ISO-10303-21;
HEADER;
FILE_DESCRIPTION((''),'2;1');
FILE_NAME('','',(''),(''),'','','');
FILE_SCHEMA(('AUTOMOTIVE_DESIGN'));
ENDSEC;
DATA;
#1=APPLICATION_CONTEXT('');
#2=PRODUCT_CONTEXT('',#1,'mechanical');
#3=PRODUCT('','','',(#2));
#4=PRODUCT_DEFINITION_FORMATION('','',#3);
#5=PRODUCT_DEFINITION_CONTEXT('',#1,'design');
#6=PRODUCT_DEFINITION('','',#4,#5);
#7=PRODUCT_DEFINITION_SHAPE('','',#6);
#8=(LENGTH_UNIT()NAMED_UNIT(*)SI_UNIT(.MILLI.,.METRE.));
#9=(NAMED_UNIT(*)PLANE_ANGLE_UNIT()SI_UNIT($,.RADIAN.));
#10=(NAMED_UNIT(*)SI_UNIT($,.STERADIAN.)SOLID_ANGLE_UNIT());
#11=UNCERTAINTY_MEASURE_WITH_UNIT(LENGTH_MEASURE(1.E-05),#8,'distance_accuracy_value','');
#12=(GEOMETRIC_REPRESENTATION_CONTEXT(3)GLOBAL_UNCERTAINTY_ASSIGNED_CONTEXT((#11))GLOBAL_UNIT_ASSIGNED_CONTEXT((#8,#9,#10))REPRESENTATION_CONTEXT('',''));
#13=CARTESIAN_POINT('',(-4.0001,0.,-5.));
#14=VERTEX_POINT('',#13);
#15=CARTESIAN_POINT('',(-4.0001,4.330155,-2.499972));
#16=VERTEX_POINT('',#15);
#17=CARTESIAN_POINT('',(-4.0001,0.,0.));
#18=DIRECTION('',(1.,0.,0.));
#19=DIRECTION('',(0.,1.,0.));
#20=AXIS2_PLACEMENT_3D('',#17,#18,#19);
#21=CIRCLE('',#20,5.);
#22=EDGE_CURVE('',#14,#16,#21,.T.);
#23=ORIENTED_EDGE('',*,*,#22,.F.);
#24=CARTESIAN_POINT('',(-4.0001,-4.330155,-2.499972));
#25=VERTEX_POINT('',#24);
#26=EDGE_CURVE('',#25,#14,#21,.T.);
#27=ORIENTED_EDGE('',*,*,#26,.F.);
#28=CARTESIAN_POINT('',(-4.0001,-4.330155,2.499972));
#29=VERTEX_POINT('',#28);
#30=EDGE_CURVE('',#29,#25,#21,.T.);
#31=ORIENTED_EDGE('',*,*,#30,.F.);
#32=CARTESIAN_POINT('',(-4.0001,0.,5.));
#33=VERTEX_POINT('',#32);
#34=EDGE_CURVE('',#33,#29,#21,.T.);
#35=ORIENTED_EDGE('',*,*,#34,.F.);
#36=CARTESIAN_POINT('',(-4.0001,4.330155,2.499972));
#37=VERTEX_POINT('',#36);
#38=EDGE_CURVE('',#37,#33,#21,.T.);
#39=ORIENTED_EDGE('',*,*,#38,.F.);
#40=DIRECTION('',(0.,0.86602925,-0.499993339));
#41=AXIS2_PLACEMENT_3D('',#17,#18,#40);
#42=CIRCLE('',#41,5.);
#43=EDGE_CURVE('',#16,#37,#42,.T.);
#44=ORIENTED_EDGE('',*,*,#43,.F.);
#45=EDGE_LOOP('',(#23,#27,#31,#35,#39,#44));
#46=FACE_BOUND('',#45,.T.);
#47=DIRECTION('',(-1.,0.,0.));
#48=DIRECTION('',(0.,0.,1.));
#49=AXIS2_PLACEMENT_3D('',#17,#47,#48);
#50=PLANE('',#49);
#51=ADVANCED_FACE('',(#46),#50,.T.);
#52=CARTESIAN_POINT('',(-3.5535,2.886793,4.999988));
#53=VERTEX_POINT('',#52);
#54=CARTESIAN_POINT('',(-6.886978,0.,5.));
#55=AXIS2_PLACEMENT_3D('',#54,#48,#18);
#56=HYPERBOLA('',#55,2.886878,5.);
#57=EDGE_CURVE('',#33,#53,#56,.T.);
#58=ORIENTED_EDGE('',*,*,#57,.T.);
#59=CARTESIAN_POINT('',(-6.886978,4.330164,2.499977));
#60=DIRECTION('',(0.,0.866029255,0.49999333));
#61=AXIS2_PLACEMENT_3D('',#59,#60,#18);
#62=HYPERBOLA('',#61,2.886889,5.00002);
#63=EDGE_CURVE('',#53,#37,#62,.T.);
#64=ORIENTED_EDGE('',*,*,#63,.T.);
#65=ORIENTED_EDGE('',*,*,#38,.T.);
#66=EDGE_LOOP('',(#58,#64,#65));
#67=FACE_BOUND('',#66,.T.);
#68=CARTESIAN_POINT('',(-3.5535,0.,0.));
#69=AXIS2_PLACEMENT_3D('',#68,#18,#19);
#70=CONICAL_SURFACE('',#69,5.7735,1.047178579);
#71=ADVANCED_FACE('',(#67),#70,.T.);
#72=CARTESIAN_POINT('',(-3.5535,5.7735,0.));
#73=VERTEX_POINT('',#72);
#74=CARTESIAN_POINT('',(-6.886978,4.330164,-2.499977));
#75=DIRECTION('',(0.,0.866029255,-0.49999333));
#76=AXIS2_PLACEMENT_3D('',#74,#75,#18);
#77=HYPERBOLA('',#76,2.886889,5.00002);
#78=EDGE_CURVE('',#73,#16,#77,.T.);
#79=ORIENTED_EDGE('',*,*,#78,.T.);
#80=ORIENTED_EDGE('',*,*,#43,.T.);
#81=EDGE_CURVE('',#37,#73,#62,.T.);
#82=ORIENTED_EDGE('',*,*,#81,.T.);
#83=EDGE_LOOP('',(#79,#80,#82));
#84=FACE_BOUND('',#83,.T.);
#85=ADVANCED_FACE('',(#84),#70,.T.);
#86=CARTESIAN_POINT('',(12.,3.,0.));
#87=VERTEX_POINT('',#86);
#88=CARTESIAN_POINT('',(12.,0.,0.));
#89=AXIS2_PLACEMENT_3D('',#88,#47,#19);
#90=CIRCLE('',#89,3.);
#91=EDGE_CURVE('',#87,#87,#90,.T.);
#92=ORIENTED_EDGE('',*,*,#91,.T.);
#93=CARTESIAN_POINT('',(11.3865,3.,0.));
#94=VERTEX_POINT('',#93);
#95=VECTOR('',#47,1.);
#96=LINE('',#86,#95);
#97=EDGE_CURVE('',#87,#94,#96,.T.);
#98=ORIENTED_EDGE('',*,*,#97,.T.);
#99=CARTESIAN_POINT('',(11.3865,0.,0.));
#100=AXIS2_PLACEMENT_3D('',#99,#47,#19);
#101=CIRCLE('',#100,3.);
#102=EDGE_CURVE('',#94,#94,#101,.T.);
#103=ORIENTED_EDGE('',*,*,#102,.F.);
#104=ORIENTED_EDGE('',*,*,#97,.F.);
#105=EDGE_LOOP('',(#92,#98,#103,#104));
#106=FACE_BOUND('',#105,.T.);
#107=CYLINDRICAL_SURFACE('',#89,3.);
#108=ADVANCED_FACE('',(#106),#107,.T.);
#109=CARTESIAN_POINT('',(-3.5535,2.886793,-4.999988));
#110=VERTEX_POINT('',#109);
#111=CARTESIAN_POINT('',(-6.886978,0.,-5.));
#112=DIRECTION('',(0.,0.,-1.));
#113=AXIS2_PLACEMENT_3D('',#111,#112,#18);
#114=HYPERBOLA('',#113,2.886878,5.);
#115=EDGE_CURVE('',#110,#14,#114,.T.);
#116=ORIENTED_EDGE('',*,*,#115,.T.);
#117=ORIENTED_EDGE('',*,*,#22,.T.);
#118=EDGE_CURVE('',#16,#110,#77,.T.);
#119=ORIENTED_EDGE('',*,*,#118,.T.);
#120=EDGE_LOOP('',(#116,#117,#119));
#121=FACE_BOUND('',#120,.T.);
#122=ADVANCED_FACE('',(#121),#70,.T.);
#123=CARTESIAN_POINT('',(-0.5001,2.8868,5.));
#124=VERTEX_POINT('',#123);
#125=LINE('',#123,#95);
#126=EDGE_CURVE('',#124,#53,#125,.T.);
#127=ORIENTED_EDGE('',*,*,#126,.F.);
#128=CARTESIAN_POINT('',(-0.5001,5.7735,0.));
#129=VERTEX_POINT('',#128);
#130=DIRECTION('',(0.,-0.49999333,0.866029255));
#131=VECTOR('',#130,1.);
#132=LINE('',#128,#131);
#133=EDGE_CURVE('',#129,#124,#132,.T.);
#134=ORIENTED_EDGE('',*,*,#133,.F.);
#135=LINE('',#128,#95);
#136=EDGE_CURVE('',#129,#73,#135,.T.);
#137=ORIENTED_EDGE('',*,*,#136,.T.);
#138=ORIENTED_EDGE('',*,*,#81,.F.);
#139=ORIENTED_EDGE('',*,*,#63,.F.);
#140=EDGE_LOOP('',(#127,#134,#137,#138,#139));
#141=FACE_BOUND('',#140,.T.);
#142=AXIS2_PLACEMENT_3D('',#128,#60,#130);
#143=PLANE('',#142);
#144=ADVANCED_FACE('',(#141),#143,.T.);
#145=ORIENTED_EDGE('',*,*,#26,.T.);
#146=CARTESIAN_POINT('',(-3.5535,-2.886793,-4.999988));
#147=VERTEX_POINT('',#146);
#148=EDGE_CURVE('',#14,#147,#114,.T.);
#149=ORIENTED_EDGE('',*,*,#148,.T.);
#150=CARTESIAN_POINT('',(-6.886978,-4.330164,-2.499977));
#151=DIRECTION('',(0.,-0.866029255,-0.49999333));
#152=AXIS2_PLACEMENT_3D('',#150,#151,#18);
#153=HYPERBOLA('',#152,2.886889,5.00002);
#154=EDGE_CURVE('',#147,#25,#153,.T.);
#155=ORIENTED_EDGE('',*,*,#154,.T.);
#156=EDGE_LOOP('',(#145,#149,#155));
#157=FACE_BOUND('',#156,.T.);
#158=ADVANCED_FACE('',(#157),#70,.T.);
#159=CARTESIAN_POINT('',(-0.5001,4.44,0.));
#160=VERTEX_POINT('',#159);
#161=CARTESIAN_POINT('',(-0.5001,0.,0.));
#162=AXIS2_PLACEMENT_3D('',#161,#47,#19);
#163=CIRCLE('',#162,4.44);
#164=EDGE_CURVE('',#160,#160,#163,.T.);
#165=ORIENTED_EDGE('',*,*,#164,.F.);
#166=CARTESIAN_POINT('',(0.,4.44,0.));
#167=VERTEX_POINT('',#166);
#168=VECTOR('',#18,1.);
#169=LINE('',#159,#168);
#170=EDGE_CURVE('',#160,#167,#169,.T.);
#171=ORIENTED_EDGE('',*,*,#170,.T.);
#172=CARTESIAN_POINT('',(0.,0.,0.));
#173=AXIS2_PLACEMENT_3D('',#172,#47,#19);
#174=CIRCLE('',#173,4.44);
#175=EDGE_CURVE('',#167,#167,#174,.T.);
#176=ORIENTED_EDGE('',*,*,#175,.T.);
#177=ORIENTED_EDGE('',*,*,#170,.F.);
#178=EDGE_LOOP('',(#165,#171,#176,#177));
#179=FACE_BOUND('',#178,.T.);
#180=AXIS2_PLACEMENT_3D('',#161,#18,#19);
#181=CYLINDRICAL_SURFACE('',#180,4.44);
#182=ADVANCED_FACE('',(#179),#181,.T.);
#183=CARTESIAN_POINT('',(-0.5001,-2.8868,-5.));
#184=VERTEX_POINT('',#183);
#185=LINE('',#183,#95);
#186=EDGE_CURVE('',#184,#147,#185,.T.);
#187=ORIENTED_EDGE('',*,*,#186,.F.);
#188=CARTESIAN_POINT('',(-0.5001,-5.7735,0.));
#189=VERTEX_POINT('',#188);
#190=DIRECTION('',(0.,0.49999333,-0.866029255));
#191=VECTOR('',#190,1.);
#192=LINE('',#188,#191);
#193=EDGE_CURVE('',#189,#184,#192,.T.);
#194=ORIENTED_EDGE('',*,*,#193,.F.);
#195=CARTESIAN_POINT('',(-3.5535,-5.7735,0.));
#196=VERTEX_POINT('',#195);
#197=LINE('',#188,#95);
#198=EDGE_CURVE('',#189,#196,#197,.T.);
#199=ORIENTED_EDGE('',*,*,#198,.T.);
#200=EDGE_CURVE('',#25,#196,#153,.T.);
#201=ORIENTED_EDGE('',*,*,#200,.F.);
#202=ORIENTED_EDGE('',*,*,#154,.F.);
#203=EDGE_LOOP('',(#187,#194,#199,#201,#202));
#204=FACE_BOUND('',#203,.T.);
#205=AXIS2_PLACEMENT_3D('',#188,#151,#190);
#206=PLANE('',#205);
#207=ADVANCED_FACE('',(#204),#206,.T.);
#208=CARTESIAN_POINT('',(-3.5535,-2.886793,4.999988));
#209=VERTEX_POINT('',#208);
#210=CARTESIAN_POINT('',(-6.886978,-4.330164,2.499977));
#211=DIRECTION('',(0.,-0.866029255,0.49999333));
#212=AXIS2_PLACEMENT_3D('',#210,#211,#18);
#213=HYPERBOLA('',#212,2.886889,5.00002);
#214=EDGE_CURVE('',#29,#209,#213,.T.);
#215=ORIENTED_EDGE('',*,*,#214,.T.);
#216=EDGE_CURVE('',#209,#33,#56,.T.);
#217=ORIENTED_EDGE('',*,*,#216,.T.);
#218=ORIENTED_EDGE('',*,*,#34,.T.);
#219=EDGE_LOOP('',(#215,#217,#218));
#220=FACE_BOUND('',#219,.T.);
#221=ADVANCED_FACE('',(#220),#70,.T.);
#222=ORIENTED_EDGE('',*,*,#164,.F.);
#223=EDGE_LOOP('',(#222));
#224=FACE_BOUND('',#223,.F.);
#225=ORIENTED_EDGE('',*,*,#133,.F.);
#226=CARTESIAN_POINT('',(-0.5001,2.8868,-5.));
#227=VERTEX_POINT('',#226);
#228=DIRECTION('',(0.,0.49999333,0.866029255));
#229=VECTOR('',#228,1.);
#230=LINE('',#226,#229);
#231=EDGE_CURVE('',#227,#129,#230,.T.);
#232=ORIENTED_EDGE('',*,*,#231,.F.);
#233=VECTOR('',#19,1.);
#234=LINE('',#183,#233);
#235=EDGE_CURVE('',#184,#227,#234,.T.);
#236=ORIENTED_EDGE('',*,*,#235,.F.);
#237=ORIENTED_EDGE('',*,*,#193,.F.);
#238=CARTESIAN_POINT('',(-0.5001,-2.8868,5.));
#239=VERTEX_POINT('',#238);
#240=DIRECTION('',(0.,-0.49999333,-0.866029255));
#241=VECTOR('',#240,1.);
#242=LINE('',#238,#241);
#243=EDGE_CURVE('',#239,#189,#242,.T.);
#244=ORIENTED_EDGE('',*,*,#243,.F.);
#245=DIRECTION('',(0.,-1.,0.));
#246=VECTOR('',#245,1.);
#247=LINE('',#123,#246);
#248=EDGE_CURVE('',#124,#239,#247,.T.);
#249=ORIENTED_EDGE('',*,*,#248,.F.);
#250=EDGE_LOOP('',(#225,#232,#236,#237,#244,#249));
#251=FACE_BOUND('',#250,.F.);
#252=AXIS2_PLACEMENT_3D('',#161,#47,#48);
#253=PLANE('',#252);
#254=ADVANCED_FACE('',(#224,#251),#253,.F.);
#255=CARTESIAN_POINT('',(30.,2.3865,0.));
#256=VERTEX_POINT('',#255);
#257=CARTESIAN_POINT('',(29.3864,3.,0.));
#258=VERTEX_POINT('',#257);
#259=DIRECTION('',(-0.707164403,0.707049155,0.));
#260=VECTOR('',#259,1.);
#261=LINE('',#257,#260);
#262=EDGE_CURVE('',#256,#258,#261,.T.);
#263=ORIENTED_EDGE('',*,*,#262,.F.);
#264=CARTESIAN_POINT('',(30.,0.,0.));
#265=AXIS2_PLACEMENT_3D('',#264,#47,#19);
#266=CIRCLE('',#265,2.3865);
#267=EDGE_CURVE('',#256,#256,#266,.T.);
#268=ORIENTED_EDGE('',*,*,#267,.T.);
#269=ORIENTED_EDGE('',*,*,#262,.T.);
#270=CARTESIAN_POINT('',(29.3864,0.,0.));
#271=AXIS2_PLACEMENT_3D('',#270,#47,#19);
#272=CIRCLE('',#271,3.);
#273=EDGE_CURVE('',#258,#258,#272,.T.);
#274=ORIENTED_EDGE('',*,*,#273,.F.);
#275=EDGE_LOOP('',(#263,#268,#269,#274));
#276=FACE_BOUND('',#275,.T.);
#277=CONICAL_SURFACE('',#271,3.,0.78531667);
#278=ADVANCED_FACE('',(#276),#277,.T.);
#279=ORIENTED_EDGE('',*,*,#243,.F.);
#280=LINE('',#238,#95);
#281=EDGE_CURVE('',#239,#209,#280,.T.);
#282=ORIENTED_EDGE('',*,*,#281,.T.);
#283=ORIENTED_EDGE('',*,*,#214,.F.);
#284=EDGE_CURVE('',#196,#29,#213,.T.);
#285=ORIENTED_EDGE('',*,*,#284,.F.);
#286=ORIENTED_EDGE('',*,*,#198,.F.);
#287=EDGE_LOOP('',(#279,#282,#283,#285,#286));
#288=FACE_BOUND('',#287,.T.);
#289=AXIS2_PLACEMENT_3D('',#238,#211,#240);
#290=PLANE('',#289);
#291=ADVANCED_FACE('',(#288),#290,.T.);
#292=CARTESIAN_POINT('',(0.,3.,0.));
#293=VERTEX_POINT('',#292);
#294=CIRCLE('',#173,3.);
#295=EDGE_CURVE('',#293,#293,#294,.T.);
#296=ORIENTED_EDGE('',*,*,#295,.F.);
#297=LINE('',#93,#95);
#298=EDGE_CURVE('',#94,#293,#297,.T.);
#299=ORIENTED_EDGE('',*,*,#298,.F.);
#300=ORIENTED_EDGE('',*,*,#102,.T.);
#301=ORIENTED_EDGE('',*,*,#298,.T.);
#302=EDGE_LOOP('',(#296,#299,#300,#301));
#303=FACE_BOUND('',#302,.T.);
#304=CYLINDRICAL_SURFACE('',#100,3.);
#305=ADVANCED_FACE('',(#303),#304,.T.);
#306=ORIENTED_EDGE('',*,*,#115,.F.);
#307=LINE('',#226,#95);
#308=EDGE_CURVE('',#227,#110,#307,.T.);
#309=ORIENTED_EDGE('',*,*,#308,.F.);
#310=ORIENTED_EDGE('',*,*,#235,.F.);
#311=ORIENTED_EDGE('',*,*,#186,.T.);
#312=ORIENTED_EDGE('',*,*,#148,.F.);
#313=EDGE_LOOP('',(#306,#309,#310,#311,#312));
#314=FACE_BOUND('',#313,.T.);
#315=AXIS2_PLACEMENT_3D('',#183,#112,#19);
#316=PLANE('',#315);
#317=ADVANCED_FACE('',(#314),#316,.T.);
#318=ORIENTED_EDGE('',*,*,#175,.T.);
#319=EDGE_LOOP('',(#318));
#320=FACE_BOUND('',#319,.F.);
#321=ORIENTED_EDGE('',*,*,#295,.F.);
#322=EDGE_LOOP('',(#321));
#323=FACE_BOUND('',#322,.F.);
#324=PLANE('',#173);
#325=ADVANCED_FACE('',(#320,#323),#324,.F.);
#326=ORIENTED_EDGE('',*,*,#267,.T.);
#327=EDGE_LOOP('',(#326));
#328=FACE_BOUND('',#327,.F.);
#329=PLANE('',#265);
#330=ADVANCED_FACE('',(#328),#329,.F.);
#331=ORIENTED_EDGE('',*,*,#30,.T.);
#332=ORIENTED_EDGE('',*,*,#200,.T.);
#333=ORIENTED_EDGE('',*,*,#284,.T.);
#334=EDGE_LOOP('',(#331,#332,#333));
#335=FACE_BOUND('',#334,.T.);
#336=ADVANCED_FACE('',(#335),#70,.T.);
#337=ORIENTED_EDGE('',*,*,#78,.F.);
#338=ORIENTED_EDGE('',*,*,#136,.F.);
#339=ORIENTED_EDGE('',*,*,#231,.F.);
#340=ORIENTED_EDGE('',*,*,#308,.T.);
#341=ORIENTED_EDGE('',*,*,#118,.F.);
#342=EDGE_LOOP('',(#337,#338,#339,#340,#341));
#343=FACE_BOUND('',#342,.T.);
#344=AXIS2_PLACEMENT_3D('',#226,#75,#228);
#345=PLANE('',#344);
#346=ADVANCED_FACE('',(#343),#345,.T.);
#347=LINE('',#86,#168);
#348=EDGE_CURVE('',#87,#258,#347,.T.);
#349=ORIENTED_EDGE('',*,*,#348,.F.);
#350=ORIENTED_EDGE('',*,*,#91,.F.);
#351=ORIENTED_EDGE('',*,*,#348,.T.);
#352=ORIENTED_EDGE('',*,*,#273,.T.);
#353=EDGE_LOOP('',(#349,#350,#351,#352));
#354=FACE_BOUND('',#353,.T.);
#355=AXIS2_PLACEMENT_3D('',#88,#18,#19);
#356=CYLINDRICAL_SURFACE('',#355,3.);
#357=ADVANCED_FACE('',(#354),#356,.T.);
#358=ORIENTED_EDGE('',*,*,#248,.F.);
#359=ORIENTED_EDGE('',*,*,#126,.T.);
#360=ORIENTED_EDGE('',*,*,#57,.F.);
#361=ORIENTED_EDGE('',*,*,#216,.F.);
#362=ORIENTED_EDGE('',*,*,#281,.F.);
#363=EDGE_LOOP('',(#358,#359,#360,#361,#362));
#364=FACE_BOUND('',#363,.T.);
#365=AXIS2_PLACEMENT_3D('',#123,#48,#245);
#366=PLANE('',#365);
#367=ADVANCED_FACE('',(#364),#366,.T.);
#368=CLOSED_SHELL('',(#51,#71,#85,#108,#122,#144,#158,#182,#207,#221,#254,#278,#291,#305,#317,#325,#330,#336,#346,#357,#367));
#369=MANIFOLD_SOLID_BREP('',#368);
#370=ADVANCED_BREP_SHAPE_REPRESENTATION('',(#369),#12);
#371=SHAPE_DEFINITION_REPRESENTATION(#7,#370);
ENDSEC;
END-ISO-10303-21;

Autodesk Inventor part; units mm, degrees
ref_plane "YZ Plane" through (0, 0, 0) normal (1, 0, 0) x (0, 1, 0)
ref_plane "XZ Plane" through (0, 0, 0) normal (0, 1, 0) x (-1, 0, 0)
sketch "Sketch1" plane through (0, 0, 0) normal (0, 0, 1) x (1, 0, 0)
  line L0 (0, 4.44) -> (0, 3)
  line L1 (12, 3) -> (30, 3)
  line L2 (30, 3) -> (30, 0)
  line L3 (30, 0) -> (-0.5001, 0)
  line L4 (-6.6001, 0) -> (36.1, 0) projected
  line L5 (-0.5001, 0) -> (-0.5001, 4.44)
  line L6 (-0.5001, 4.44) -> (0, 4.44)
  line L7 (12, 3) -> (11.3865, 3)
  line L8 (11.3865, 3) -> (0, 3)
  line L9 (0, -0.888) -> (0, 5.328) projected
  dimension "d0" = 30
  dimension "d1" = 18
  dimension "d2" = 6
  dimension "d9" = 0.5001
  dimension "d10" = 8.88
  dimension "d13" = 0.6136
  dimension "d14" = 6
revolve "Body" add sketch "Sketch1" angle 360 about axis through (30, 0, 0) along (-1, 0, 0)
sketch "Sketch2" plane through (-0.5001, 0, 0) normal (-1, 0, 0) x (0, 0, 1)
  line L0 (0, 5.7735) -> (5, 2.8868)
  line L1 (5, 2.8868) -> (5, -2.8868)
  line L2 (5, -2.8868) -> (0, -5.7735)
  line L3 (0, -5.7735) -> (-5, -2.8868)
  line L4 (-5, -2.8868) -> (-5, 2.8868)
  line L5 (-5, 2.8868) -> (0, 5.7735)
  point P0 (0, 0)
  point P1 (0, 0)
  dimension "d11" = 10
extrude "Head" add sketch "Sketch2" along normal blind 3.5
sketch "Sketch4" plane through (0, 0, 0) normal (0, 0, 1) x (1, 0, 0)
  line L0 (-4.0001, 5) -> (-4.0001, 5.7735)
  line L1 (-4.0001, 5.7735) -> (-3.5535, 5.7735)
  line L2 (-3.5535, 5.7735) -> (-4.0001, 5)
  line L3 (-4.7001, 0) -> (0.1999, 0) projected
  line L4 (-0.5001, 5.7735) -> (-4.0001, 5.7735) projected
  line L5 (-4.0001, 2.8868) -> (-4.0001, 5.7735) projected
  dimension "d5" = 30
  dimension "d19" = 10
revolve "Chamfer1" cut sketch "Sketch4" angle 360 about axis through (-10, 0, 0) along (1, 0, 0)
thread "Thread" size "M6x1" class "6g" standard "ISO Metric profile" length 18
chamfer "Chamfer2" distance 0.6135 distance2 0.6136 1 edges at (30, -3, 0) measured on face at (30, -0.7485, -0.6631)
ref_plane "Work Plane1" through (1.525, 0, 0) normal (0, 0, 1) x (1, 0, 0)
equation "\"d0\" = NLG"
equation "\"d1\" = GEL"
equation "\"d2\" = GD"
equation "\"d10\" = SD2"
equation "\"d14\" = BDM"
equation "\"d11\" = SW"
equation "\"d3\" = KOH - SD"
equation "\"d5\" = ANG1"
equation "\"d19\" = SW0"
equation "\"d15\" = GEL"
equation "\"d6\" = -0.5 * SPD + 0.5 * GD"
equation "\"NLG\" = 30"
equation "\"GD\" = NND"
equation "\"BDM\" = NND"
equation "\"KOH\" = 4"
equation "\"GEL\" = 18"
equation "\"SW\" = 10"
equation "\"SW0\" = SW"
equation "\"SPD\" = NND - 1.2269 * PTC"
equation "\"SD2\" = 8.88"
equation "\"SD\" = 0.5"
equation "\"ANG1\" = 30deg"
equation "\"GAL\" = 0.61345 * PTC"
equation "\"GUL\" = 0.61345 * PTC"
equation "\"RR\" = 0.25"
equation "\"GD1\" = THREADDIA - 1.2269 * PTC"
equation "\"THREADDIA\" = 6"
equation "\"SDH\" = SD2"
equation "\"TOA\" = 30deg"
equation "\"PTC\" = 1"
equation "\"NND\" = 6"
equation "\"E0\" = 1.155 * SW"
properties part number "ISO 4014 - M6 x 30" material "Stainless Steel, 440C"
